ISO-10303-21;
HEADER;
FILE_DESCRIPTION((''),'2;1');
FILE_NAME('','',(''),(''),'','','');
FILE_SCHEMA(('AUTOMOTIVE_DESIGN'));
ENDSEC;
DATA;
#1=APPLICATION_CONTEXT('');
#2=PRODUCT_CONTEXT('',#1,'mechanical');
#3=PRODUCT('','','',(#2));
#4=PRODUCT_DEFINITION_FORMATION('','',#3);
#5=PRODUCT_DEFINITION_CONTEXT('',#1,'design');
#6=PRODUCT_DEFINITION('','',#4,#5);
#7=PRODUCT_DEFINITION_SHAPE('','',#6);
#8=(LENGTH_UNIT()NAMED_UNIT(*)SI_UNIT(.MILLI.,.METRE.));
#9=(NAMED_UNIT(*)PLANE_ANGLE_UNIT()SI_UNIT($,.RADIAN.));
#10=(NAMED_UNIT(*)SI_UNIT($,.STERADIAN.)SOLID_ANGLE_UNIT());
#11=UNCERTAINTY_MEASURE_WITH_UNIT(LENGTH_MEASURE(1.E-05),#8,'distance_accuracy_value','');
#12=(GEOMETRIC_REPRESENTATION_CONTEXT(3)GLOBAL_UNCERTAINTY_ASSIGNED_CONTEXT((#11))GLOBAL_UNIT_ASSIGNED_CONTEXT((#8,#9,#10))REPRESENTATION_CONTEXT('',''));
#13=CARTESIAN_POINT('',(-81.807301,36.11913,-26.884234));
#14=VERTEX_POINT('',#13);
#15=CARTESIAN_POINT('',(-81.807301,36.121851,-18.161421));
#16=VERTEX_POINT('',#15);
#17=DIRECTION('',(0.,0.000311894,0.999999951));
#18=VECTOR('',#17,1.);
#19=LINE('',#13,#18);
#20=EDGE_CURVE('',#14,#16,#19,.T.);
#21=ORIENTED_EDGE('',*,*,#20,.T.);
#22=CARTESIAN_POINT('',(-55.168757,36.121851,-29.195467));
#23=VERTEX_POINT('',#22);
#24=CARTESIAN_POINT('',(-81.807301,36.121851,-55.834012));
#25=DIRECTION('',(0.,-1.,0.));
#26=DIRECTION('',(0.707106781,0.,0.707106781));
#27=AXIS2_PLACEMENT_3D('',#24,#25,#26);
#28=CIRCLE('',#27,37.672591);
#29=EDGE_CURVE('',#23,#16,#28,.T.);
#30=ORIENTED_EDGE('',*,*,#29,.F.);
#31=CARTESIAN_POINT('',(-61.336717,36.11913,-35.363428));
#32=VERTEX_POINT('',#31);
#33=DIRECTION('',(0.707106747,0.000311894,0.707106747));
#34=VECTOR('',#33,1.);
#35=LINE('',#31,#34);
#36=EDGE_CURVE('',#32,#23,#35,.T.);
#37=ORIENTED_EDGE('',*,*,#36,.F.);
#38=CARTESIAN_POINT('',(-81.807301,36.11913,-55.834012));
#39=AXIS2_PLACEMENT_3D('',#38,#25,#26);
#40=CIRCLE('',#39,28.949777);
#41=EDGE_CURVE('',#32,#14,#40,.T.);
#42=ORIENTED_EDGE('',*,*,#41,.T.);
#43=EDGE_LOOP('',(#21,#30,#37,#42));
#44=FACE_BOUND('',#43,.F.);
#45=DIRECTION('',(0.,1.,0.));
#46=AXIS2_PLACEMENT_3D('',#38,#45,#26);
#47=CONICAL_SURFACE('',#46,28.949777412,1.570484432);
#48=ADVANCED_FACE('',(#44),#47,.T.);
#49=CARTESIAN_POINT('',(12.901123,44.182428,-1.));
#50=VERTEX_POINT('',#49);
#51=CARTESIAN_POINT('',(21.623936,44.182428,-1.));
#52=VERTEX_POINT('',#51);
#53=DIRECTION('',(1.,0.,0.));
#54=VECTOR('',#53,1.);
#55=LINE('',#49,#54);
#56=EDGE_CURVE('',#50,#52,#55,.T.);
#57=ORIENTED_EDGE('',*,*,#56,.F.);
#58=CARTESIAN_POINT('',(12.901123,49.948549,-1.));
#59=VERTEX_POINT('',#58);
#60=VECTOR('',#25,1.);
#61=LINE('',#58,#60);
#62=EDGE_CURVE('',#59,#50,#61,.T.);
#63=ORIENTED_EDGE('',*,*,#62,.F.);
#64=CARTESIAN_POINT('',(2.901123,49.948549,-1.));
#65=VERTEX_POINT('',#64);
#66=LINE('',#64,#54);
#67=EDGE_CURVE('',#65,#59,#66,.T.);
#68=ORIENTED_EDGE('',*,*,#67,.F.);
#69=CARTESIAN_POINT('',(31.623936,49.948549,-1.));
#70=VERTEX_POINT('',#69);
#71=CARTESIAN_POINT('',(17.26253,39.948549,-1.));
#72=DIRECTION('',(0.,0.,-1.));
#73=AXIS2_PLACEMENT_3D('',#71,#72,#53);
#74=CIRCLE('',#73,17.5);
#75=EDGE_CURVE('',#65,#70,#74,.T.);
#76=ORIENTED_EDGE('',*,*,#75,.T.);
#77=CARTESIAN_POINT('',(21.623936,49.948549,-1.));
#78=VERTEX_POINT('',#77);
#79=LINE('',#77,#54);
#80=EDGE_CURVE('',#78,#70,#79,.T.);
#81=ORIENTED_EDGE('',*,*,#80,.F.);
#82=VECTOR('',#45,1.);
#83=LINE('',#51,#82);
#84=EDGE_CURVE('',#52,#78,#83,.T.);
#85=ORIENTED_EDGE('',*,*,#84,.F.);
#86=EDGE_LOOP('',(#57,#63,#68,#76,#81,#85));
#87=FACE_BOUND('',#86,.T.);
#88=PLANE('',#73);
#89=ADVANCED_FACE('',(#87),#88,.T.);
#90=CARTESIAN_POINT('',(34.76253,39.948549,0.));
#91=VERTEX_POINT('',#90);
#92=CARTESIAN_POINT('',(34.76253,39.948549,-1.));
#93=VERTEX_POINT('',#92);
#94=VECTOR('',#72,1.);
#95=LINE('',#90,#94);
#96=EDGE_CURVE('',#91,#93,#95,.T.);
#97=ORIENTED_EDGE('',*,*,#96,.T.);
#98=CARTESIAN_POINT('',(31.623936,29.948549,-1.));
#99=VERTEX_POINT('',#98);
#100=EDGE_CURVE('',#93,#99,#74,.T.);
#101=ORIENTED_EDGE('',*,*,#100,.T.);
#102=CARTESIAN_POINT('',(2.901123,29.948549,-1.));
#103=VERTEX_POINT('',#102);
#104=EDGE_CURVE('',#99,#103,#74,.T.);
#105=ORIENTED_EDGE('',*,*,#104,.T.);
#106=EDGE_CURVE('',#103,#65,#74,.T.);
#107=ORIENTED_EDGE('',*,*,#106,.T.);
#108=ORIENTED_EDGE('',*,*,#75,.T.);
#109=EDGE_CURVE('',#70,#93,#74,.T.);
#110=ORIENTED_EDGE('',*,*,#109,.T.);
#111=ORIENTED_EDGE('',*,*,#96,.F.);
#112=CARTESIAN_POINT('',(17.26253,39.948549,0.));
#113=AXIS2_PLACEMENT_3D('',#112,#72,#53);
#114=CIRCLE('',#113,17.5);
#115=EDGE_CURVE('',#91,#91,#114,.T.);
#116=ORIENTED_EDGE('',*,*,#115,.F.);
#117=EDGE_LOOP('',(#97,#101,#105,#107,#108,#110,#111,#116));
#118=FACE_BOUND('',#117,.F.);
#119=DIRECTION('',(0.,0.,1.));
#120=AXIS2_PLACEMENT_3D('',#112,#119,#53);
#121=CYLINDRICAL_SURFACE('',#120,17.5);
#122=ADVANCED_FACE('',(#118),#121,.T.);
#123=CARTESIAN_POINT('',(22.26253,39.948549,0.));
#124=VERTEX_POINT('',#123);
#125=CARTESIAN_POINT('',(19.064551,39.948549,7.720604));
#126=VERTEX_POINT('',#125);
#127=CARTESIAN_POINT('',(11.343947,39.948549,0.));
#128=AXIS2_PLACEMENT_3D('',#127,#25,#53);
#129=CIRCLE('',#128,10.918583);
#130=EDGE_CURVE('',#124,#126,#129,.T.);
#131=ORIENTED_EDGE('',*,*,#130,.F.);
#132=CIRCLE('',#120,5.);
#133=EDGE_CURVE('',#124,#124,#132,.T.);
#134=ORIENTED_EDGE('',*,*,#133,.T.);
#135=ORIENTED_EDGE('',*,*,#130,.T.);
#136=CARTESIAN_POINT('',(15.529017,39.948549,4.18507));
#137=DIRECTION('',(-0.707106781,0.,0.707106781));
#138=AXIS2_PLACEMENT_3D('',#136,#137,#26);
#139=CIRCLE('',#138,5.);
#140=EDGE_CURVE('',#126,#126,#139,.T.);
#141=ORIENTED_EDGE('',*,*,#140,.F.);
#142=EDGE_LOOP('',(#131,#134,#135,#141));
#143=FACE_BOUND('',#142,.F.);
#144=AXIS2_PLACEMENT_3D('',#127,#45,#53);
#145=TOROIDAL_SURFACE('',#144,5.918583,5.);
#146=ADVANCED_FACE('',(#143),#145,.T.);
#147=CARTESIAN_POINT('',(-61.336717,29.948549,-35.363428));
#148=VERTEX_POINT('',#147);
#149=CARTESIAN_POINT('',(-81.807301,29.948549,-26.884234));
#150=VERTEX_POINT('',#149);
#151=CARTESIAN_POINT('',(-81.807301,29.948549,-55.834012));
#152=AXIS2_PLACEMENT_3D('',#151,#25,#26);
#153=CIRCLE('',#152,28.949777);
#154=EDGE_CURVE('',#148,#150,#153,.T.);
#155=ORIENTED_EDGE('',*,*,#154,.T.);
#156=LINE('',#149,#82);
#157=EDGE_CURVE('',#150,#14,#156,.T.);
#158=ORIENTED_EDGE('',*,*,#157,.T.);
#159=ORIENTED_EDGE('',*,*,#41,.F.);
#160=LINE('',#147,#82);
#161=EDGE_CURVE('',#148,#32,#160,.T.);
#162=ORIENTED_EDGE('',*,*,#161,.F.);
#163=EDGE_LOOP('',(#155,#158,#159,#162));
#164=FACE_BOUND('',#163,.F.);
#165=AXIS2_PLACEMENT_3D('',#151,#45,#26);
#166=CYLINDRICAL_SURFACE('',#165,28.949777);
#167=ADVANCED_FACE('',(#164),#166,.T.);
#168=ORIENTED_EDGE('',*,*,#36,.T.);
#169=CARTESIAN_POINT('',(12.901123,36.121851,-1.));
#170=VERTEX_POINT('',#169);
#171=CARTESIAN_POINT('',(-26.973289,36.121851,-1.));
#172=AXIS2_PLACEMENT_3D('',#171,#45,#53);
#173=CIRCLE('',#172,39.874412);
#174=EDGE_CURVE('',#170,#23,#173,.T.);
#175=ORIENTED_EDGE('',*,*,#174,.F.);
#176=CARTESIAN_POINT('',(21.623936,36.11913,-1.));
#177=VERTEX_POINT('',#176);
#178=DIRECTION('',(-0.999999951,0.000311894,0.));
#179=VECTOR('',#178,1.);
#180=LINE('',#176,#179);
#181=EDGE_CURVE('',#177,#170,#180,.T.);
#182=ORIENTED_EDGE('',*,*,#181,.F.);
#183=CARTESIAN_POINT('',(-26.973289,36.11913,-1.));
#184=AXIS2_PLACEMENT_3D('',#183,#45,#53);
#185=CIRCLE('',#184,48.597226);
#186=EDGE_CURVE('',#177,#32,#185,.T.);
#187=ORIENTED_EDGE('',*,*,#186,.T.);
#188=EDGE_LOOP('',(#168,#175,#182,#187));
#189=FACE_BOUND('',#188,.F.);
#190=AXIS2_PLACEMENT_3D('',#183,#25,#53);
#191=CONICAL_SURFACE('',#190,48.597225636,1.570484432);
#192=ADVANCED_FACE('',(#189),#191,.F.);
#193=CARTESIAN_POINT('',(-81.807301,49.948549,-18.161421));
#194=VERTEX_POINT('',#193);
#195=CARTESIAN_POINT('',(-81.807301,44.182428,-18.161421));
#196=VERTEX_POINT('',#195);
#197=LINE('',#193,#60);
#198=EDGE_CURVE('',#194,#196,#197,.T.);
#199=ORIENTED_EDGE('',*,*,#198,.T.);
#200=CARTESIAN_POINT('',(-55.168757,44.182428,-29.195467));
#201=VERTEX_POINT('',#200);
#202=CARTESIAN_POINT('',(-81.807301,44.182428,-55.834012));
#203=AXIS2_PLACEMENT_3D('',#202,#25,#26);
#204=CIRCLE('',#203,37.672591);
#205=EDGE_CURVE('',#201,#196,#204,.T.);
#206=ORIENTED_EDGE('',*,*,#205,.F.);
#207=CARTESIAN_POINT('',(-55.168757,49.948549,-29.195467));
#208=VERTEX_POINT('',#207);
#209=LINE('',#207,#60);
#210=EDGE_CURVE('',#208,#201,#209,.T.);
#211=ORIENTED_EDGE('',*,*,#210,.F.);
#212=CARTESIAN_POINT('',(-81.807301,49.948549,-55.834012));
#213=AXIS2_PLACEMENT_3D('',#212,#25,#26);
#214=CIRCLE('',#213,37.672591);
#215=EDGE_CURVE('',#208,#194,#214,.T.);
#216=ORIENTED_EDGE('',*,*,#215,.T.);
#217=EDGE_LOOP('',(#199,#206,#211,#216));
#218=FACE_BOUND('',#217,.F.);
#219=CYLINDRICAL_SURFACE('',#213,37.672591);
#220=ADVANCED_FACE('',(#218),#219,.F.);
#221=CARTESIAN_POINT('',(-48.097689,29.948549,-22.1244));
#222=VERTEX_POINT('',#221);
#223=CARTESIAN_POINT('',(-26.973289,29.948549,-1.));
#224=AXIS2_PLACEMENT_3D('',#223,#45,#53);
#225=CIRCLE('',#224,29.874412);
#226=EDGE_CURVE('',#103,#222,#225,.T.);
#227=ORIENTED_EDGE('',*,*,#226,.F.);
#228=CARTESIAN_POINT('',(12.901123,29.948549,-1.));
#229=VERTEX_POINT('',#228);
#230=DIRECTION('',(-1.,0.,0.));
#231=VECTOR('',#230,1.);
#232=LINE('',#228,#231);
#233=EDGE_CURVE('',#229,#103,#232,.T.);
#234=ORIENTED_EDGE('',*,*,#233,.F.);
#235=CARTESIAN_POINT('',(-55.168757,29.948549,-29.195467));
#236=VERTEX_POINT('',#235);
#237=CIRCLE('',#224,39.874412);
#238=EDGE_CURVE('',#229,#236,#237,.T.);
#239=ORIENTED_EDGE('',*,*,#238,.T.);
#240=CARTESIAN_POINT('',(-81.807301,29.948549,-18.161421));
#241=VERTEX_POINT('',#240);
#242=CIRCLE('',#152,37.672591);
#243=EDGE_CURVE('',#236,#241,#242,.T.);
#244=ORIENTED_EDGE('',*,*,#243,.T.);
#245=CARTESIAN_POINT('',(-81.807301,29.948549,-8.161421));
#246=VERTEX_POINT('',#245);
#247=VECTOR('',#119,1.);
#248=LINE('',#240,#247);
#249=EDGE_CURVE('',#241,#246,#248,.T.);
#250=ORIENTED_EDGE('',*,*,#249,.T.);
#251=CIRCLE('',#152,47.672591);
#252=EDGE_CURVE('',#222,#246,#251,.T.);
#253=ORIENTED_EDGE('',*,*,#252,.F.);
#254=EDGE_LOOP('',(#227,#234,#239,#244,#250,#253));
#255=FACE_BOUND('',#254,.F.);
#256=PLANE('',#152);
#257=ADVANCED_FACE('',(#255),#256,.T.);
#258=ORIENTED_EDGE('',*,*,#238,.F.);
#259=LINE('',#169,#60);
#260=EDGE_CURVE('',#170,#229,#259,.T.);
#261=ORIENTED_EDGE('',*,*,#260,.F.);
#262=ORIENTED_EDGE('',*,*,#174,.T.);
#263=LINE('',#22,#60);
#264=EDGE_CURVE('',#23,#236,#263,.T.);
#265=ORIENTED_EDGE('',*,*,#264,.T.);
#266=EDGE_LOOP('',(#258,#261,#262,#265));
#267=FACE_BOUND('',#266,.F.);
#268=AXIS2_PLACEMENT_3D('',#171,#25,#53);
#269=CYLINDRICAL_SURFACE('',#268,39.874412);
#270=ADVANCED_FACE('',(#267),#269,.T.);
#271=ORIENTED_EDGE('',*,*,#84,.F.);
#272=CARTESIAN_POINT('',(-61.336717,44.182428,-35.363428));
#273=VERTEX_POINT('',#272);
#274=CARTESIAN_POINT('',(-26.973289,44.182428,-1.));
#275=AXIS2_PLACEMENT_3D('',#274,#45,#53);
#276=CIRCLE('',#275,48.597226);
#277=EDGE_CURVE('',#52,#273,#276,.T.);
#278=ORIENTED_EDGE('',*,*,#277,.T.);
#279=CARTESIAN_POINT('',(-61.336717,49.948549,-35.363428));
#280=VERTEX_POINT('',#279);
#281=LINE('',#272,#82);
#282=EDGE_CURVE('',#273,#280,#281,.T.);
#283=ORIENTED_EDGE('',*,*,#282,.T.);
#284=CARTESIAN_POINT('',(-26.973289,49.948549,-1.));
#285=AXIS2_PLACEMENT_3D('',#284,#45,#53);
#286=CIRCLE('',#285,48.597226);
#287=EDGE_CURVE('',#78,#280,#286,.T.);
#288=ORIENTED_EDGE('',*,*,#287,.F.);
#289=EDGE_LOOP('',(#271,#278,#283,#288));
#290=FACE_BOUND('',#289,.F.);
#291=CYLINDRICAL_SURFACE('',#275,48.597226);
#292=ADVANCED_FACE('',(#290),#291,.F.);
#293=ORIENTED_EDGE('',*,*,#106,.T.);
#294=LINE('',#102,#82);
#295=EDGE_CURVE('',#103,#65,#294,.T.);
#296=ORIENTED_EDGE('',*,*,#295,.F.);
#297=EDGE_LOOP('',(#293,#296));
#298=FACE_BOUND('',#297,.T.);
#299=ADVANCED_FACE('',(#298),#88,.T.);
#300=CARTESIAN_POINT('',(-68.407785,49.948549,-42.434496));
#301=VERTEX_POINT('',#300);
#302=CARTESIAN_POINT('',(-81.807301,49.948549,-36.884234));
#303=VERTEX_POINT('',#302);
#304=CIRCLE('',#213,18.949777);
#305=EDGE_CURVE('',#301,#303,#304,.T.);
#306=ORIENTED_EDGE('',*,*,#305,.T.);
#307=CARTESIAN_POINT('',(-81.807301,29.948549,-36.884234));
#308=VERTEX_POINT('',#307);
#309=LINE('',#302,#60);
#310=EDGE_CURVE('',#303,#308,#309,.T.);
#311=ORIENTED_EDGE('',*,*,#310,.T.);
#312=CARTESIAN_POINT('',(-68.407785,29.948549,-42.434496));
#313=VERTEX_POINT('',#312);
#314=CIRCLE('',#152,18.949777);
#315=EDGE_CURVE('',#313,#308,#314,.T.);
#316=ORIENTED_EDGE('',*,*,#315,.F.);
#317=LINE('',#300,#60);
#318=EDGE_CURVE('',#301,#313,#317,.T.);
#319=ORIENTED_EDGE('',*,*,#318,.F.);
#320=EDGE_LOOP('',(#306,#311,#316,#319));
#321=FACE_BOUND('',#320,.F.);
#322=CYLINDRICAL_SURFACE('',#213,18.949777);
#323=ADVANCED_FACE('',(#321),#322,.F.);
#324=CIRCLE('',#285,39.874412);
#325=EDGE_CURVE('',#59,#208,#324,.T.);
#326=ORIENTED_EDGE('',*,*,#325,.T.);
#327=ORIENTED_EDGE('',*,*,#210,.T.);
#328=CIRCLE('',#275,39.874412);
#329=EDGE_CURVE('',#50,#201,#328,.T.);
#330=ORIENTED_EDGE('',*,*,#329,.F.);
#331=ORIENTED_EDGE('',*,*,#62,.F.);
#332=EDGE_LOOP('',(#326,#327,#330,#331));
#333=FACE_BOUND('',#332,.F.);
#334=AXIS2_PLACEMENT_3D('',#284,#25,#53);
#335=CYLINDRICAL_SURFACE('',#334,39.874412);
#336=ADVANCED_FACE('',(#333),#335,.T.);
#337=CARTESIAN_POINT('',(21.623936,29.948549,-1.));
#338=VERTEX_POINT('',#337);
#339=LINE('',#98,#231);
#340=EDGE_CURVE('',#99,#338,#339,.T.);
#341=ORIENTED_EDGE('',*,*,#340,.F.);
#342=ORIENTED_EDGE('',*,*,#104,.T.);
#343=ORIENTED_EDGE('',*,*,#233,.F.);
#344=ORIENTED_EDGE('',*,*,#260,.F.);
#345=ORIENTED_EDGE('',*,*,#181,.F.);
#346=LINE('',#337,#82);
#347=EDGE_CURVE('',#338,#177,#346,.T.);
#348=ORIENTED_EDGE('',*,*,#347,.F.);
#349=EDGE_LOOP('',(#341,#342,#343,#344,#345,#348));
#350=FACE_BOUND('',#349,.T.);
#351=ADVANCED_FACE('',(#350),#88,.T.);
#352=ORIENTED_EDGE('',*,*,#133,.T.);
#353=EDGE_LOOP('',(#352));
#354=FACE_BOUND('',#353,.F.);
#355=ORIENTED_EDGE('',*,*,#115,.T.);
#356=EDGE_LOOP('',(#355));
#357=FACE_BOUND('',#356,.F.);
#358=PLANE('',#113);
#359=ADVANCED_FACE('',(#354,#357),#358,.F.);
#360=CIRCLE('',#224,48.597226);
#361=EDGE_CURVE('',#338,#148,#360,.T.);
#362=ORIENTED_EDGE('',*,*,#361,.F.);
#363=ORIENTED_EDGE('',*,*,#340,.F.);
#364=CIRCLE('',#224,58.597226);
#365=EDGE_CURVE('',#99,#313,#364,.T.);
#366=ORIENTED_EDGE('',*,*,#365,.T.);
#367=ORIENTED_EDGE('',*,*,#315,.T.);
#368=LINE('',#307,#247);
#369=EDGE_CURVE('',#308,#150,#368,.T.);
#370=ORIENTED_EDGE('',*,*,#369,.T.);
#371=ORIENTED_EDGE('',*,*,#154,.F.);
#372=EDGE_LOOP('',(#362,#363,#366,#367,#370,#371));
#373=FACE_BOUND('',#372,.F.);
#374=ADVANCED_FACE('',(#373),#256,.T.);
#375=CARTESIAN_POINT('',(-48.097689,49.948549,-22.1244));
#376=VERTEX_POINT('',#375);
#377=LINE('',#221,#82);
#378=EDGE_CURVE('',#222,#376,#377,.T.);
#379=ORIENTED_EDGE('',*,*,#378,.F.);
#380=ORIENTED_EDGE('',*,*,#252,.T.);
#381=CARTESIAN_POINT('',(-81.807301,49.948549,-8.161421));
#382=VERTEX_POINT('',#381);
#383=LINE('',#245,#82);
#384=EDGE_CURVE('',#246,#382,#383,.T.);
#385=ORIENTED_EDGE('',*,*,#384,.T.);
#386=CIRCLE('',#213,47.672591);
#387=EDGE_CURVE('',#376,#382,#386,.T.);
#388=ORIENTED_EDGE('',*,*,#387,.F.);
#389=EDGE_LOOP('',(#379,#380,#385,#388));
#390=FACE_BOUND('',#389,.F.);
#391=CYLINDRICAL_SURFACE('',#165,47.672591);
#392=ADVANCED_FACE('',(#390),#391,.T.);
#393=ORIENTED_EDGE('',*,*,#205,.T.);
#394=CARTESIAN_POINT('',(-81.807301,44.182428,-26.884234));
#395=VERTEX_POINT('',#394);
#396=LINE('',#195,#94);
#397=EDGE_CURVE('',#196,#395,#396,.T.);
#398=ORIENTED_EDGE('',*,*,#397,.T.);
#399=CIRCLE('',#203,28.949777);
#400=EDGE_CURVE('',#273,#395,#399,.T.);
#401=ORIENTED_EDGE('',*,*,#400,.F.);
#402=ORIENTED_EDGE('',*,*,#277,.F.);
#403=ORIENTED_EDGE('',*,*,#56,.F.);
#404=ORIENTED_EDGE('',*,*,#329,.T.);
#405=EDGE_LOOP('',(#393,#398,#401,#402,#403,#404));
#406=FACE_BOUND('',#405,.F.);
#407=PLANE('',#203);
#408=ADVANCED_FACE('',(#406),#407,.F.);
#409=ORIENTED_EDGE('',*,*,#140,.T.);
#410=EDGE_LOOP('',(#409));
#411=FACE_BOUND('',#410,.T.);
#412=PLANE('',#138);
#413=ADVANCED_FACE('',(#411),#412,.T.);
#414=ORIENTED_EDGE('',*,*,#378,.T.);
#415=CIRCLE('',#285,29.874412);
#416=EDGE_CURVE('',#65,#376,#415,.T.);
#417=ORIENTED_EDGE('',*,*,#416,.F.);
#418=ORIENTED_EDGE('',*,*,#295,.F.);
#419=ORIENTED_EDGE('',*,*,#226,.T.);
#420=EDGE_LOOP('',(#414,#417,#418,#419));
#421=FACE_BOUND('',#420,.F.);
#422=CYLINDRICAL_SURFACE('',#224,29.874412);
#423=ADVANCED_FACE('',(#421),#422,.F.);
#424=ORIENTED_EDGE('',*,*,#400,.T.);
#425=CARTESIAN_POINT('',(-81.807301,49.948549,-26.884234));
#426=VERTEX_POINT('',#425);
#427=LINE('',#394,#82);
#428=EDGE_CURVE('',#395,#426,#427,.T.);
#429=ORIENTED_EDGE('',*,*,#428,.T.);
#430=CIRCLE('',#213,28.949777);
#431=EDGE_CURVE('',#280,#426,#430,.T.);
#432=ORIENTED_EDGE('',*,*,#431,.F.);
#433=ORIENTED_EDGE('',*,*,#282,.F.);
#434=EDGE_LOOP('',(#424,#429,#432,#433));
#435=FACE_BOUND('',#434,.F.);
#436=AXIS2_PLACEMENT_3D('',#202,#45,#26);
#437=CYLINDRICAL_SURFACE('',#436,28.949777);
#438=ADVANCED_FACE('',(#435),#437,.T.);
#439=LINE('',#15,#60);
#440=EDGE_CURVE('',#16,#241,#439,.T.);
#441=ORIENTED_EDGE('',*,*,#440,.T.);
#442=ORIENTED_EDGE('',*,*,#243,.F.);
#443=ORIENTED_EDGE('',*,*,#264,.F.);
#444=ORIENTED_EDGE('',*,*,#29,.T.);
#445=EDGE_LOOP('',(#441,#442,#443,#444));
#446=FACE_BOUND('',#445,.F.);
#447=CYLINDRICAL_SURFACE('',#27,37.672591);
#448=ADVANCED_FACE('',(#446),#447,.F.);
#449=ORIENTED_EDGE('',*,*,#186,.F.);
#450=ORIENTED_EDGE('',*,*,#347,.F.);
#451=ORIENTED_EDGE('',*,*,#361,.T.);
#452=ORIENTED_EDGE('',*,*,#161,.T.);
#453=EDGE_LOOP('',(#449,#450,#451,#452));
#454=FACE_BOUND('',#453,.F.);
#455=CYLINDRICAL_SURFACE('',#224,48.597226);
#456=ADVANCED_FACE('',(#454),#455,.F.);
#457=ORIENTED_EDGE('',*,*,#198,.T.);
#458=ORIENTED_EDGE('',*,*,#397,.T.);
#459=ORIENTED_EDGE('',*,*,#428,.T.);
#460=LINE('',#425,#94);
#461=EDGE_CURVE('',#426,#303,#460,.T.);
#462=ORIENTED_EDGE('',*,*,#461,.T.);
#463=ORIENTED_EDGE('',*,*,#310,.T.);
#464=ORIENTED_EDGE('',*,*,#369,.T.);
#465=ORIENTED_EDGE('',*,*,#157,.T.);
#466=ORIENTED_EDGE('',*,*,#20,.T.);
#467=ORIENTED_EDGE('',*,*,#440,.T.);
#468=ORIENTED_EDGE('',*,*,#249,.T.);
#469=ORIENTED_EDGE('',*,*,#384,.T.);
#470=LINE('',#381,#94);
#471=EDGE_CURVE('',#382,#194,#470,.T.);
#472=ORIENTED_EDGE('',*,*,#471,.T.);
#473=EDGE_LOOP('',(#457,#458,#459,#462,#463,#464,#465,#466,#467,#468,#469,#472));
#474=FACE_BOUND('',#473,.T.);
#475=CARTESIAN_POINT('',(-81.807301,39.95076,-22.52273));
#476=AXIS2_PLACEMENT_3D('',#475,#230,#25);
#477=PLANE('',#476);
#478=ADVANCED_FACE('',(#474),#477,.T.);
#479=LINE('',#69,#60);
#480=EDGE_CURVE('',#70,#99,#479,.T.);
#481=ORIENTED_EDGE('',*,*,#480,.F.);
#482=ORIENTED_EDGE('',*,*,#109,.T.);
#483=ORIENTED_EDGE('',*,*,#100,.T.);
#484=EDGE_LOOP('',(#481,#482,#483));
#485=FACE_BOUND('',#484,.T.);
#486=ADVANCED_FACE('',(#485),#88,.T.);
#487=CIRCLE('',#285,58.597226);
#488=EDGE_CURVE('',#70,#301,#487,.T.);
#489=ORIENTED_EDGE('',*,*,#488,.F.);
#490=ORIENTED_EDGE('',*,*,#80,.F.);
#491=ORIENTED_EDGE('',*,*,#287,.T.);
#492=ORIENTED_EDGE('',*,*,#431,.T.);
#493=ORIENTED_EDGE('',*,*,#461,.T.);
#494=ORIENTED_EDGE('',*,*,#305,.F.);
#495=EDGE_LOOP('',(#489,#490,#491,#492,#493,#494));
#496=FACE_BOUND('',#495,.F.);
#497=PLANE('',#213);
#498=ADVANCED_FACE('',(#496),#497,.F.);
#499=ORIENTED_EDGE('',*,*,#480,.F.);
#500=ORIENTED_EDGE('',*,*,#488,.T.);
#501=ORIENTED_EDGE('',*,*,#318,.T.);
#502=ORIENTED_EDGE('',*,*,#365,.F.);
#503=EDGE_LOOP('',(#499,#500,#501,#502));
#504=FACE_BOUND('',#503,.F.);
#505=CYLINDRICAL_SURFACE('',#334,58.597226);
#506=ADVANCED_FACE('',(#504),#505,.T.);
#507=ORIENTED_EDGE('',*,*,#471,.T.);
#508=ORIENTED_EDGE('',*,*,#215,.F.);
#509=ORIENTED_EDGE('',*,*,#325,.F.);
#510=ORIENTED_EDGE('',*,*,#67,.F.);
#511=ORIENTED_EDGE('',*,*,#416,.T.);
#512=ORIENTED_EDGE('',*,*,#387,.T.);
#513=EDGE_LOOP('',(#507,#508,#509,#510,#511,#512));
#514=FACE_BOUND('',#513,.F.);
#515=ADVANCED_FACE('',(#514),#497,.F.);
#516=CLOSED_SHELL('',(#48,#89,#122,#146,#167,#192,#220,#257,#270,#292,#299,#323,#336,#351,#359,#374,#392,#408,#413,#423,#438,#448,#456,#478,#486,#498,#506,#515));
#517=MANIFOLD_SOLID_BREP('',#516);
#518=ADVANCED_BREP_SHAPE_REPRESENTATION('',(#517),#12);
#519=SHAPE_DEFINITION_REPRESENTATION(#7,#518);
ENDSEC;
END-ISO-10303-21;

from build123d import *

# Parameters (mm, degrees)
F0_R     = 5
F1_ANGLE = 45
F2_R     = 17.5
F2_R_2   = 5
F3_DEPTH = 1
F5_ANGLE = 135
F7_ANGLE = 45


with BuildPart() as f1:
    # F0 (on Top) → F1 (revolve)
    with BuildSketch(Plane.XY):
        with Locations((17.2625295818, 39.9485491216)):
            Circle(F0_R)
    revolve(axis=Axis((11.3439466804, 38.7977138162, 0), (0, -1, 0)), revolution_arc=F1_ANGLE)

    # F2 (on face) → F3 (join)
    with BuildSketch(Plane(origin=(0, 0, 0), x_dir=(1, 0, 0), z_dir=(0, 0, -1))):
        with Locations((17.2625295818, -39.9485491216)):
            Circle(F2_R)
        with Locations((17.2625295818, -39.9485491216)):
            Circle(F2_R_2, mode=Mode.SUBTRACT)
        with Locations((17.2625295818, -39.9485491216)):
            Circle(F2_R_2)
    extrude(amount=F3_DEPTH)

    # F4 (on face) → F5 (revolve)
    with BuildSketch(Plane(origin=(0, 0, -1), x_dir=(1, 0, 0), z_dir=(0, 0, -1))):
        Polygon((12.9011229654, -29.9485491216), (2.9011229654, -29.9485491216), (2.9011229654, -49.9485491216), (12.9011229654, -49.9485491216), (12.9011229654, -44.1824280606), (21.6239361981, -44.1824280606), (21.6239361981, -49.9485491216), (31.6239361981, -49.9485491216), (31.6239361981, -29.9485491216), (21.6239361981, -29.9485491216), (21.6239361981, -36.1191299331), (12.9011229654, -36.1218505295), align=None)
    revolve(axis=Axis((-26.9732894376, 40.484293364, -1), (0, 1, 0)), revolution_arc=F5_ANGLE)

    # F6 (on face) → F7 (revolve)
    with BuildSketch(Plane(origin=(-12.9866447188, 0, 12.9866447188), x_dir=(0, -1, 0), z_dir=(-0.7071067812, 0, 0.7071067812))):
        Polygon((-36.1218505295, -59.6545150564), (-29.9485491216, -59.6545150564), (-29.9485491216, -49.6545150564), (-49.9485491216, -49.6545150564), (-49.9485491216, -59.6545150564), (-44.1824280606, -59.6545150564), (-44.1824280606, -68.3773282891), (-49.9485491216, -68.3773282891), (-49.9485491216, -78.3773282891), (-29.9485491216, -78.3773282891), (-29.9485491216, -68.3773282891), (-36.1191299331, -68.3773282891), align=None)
    revolve(axis=Axis((-81.8073011532, 42.3686988652, -55.8340117156), (0, -1, 0)), revolution_arc=F7_ANGLE)


solid = f1.part
